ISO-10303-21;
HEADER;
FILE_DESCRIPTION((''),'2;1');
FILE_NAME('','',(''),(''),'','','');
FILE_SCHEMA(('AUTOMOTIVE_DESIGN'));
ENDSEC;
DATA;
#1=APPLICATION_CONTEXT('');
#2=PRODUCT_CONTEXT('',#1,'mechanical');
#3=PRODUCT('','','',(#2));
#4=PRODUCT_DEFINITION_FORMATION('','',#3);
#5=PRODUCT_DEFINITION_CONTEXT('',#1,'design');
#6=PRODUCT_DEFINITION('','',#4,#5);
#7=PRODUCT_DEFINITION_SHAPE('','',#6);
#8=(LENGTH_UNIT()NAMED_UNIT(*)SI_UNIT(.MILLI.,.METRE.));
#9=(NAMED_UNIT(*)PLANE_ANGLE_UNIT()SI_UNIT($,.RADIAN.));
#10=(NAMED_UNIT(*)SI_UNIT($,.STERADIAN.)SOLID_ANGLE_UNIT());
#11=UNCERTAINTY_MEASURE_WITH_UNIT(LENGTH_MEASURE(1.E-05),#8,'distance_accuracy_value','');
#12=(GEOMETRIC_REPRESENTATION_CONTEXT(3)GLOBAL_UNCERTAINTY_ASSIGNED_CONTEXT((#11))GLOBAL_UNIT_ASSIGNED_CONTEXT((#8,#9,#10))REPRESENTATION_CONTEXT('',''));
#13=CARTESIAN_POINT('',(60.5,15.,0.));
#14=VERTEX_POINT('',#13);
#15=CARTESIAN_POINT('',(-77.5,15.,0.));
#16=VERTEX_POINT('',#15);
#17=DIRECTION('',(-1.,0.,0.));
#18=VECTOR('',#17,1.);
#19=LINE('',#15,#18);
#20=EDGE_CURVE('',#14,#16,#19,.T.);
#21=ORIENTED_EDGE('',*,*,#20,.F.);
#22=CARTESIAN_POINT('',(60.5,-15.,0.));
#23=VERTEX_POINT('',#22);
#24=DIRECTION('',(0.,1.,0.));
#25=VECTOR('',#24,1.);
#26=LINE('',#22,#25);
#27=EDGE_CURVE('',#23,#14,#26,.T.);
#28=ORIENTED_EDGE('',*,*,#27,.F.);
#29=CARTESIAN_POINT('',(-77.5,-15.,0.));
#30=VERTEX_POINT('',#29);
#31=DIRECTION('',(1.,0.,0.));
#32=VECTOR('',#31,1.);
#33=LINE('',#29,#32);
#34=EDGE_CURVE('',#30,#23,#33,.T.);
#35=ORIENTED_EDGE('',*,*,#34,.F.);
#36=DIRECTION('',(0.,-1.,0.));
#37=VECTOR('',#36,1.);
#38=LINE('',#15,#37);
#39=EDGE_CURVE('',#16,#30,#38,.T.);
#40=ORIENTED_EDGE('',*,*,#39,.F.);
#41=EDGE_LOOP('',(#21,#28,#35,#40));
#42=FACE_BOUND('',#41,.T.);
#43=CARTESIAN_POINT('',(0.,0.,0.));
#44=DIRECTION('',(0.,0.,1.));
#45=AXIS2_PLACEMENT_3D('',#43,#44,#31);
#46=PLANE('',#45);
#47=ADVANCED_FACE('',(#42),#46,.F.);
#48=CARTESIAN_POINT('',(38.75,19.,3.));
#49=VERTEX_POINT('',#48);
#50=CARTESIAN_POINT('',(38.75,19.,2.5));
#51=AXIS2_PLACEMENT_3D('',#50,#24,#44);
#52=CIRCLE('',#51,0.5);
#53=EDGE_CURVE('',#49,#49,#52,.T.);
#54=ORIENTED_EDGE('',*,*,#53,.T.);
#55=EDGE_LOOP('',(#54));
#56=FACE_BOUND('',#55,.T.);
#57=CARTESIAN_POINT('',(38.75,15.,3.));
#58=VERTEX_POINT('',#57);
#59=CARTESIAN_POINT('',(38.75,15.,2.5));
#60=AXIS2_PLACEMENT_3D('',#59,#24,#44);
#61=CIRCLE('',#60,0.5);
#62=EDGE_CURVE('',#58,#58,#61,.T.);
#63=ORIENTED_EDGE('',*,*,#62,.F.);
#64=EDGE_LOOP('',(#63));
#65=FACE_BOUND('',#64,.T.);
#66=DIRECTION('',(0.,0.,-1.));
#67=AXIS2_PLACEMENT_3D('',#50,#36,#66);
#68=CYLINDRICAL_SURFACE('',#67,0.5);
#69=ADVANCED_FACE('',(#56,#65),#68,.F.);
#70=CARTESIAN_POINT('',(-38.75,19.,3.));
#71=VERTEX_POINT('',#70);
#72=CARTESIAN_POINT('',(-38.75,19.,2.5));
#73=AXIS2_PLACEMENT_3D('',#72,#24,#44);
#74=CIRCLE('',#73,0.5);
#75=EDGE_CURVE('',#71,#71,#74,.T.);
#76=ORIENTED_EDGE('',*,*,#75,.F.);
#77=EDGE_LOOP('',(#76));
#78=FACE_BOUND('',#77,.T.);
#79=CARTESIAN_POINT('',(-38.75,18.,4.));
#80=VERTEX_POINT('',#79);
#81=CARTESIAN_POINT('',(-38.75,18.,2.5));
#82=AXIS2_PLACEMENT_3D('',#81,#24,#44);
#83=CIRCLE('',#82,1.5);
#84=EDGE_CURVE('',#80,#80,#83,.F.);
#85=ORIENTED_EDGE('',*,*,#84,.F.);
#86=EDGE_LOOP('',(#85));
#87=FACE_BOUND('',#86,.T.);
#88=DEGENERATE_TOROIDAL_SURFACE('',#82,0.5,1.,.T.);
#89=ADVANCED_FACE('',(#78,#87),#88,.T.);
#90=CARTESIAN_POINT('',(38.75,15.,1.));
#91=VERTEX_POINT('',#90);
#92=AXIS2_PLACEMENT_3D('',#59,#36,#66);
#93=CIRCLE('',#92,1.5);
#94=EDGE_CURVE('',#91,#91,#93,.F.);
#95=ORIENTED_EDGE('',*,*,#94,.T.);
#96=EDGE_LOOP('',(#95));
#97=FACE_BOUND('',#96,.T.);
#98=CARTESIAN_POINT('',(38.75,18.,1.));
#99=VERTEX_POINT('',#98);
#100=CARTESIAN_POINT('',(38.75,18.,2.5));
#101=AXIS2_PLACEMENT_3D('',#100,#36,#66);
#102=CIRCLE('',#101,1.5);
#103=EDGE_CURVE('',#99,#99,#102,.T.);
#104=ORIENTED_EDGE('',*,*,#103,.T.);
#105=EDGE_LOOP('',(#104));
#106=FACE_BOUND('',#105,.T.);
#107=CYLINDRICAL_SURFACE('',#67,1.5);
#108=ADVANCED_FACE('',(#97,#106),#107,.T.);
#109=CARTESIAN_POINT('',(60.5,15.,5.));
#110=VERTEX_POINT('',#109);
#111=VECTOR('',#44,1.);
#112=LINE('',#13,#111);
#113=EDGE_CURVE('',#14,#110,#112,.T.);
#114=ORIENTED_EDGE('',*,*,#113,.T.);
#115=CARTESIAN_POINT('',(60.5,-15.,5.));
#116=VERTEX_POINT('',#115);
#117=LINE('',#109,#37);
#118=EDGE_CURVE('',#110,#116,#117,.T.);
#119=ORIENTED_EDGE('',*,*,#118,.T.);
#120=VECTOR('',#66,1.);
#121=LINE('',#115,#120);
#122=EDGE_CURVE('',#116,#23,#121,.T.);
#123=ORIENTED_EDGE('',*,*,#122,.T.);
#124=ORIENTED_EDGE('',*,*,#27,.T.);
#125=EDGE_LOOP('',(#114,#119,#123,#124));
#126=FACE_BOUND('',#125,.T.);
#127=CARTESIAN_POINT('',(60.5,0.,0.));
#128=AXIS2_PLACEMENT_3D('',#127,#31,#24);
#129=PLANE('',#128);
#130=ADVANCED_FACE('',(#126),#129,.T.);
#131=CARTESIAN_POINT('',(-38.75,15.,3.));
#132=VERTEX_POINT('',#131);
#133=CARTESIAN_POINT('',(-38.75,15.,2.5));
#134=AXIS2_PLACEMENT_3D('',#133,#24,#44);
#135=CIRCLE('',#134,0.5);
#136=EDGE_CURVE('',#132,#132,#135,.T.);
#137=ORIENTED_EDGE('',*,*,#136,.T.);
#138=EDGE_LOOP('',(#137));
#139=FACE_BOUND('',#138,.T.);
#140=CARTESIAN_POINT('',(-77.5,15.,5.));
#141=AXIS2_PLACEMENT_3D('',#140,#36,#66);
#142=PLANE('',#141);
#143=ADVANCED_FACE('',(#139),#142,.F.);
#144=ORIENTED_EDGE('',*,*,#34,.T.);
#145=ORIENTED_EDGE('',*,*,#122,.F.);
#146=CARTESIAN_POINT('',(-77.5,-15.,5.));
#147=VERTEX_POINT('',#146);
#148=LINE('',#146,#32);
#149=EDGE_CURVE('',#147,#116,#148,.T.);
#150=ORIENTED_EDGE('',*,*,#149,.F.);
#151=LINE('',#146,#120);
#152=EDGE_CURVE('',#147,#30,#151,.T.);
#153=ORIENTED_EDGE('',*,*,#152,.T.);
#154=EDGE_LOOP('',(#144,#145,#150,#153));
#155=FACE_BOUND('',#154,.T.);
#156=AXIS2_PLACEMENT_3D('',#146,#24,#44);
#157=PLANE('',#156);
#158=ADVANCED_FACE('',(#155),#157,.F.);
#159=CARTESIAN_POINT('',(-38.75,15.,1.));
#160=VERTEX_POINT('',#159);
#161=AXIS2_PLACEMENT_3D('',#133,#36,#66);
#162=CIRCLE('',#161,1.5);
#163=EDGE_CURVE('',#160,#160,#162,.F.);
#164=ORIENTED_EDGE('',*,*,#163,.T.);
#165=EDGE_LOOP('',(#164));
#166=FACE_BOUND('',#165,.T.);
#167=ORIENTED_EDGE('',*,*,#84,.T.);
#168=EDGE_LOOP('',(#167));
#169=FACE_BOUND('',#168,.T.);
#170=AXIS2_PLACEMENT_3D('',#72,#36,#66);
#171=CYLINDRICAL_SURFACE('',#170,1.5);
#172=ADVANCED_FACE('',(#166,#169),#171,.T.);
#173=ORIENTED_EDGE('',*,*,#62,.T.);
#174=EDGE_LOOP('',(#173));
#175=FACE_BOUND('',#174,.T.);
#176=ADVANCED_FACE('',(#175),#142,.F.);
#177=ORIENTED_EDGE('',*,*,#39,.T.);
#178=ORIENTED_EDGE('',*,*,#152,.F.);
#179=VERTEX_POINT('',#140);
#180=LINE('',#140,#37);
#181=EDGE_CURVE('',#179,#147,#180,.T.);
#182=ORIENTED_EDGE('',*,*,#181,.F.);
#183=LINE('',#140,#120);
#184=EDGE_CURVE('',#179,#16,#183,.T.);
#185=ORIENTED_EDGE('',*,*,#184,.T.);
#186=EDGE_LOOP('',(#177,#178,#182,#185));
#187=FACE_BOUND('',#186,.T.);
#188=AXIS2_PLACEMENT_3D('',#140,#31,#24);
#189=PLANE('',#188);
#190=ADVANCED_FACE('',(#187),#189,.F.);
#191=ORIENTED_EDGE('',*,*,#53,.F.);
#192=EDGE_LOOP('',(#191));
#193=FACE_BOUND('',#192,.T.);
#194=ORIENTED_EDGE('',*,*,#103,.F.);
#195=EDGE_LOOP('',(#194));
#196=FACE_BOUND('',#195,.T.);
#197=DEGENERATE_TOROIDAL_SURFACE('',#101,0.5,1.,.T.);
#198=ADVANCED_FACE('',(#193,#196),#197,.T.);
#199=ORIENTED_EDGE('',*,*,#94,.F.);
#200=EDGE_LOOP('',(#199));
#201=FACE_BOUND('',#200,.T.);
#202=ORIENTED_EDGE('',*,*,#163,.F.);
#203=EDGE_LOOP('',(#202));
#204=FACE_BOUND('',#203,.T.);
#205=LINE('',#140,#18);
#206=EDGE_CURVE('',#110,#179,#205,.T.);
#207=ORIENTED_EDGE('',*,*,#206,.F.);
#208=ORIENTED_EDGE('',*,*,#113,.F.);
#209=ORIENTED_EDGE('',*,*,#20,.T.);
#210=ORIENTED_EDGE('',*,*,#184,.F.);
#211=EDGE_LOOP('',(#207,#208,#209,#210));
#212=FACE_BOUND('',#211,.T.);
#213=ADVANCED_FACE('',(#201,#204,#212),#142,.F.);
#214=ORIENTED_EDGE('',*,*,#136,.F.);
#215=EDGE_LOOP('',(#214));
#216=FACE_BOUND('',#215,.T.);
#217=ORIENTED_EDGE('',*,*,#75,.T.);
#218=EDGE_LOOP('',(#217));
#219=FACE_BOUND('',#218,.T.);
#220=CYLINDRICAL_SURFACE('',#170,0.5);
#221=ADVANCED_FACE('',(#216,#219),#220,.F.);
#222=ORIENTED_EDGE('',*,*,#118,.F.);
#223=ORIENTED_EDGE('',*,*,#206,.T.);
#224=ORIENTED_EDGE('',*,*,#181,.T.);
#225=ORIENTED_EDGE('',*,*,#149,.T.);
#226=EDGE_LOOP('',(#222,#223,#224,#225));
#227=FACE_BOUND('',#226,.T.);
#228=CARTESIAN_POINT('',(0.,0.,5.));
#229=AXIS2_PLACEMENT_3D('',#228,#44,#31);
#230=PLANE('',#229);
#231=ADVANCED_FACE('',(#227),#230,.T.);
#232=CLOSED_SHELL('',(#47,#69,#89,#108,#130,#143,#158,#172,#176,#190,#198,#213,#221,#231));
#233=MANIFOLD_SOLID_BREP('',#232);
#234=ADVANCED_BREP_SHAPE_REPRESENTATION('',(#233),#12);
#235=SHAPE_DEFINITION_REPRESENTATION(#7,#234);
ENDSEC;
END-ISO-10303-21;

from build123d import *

# Parameters (mm, degrees)
ESQUISSE1_W             = 155
ESQUISSE1_H             = 30
BOSS_EXTRU_1_DEPTH      = 5
ESQUISSE2_R             = 1.5
ESQUISSE2_R_2           = 0.5
BOSS_EXTRU_2_DEPTH      = 4
CONG_1_R                = 1
ESQUISSE4_W             = 5
ESQUISSE4_H             = 30
ENL_V_MAT_EXTRU_2_DEPTH = 17


with BuildPart() as part:
    # Esquisse1 → Boss.-Extru.1 (new body)
    with BuildSketch(Plane.XY):
        Rectangle(ESQUISSE1_W, ESQUISSE1_H)
    extrude(amount=BOSS_EXTRU_1_DEPTH)

    # Esquisse2 → Boss.-Extru.2 (add)
    # profile 1 of 2: a face of its own
    with BuildSketch(Plane(origin=(0, 15, 0), x_dir=(1, 0, 0), z_dir=(0, 1, 0))):
        with Locations(Location((-38.75, -2.5, 0), (0, 0, 90))):
            Circle(ESQUISSE2_R)
        with Locations(Location((-38.75, -2.5, 0), (0, 0, 270))):
            Circle(ESQUISSE2_R_2, mode=Mode.SUBTRACT)
    # profile 2 of 2: a face of its own
    with BuildSketch(Plane(origin=(0, 15, 0), x_dir=(1, 0, 0), z_dir=(0, 1, 0))):
        with Locations(Location((38.75, -2.5, 0), (0, 0, 90))):
            Circle(ESQUISSE2_R)
        with Locations(Location((38.75, -2.5, 0), (0, 0, 270))):
            Circle(ESQUISSE2_R_2, mode=Mode.SUBTRACT)
    extrude(amount=BOSS_EXTRU_2_DEPTH)

    # Congé1
    cong_1_edges = [part.edges().sort_by_distance(p)[0] for p in [
        (-38.75, 19, 4),
        (38.75, 19, 4),
    ]]
    fillet(cong_1_edges, radius=CONG_1_R - 0.0001)  # a hair under: the kernel refuses the full size

    # Esquisse4 → Enlèv. mat.-Extru.2 (cut)
    with BuildSketch(Plane(origin=(77.5, 0, 0), x_dir=(0, 0, -1), z_dir=(1, 0, 0))):
        with Locations((-2.5, 0)):
            Rectangle(ESQUISSE4_W, ESQUISSE4_H)
    extrude(amount=-ENL_V_MAT_EXTRU_2_DEPTH, mode=Mode.SUBTRACT)


solid = part.part
